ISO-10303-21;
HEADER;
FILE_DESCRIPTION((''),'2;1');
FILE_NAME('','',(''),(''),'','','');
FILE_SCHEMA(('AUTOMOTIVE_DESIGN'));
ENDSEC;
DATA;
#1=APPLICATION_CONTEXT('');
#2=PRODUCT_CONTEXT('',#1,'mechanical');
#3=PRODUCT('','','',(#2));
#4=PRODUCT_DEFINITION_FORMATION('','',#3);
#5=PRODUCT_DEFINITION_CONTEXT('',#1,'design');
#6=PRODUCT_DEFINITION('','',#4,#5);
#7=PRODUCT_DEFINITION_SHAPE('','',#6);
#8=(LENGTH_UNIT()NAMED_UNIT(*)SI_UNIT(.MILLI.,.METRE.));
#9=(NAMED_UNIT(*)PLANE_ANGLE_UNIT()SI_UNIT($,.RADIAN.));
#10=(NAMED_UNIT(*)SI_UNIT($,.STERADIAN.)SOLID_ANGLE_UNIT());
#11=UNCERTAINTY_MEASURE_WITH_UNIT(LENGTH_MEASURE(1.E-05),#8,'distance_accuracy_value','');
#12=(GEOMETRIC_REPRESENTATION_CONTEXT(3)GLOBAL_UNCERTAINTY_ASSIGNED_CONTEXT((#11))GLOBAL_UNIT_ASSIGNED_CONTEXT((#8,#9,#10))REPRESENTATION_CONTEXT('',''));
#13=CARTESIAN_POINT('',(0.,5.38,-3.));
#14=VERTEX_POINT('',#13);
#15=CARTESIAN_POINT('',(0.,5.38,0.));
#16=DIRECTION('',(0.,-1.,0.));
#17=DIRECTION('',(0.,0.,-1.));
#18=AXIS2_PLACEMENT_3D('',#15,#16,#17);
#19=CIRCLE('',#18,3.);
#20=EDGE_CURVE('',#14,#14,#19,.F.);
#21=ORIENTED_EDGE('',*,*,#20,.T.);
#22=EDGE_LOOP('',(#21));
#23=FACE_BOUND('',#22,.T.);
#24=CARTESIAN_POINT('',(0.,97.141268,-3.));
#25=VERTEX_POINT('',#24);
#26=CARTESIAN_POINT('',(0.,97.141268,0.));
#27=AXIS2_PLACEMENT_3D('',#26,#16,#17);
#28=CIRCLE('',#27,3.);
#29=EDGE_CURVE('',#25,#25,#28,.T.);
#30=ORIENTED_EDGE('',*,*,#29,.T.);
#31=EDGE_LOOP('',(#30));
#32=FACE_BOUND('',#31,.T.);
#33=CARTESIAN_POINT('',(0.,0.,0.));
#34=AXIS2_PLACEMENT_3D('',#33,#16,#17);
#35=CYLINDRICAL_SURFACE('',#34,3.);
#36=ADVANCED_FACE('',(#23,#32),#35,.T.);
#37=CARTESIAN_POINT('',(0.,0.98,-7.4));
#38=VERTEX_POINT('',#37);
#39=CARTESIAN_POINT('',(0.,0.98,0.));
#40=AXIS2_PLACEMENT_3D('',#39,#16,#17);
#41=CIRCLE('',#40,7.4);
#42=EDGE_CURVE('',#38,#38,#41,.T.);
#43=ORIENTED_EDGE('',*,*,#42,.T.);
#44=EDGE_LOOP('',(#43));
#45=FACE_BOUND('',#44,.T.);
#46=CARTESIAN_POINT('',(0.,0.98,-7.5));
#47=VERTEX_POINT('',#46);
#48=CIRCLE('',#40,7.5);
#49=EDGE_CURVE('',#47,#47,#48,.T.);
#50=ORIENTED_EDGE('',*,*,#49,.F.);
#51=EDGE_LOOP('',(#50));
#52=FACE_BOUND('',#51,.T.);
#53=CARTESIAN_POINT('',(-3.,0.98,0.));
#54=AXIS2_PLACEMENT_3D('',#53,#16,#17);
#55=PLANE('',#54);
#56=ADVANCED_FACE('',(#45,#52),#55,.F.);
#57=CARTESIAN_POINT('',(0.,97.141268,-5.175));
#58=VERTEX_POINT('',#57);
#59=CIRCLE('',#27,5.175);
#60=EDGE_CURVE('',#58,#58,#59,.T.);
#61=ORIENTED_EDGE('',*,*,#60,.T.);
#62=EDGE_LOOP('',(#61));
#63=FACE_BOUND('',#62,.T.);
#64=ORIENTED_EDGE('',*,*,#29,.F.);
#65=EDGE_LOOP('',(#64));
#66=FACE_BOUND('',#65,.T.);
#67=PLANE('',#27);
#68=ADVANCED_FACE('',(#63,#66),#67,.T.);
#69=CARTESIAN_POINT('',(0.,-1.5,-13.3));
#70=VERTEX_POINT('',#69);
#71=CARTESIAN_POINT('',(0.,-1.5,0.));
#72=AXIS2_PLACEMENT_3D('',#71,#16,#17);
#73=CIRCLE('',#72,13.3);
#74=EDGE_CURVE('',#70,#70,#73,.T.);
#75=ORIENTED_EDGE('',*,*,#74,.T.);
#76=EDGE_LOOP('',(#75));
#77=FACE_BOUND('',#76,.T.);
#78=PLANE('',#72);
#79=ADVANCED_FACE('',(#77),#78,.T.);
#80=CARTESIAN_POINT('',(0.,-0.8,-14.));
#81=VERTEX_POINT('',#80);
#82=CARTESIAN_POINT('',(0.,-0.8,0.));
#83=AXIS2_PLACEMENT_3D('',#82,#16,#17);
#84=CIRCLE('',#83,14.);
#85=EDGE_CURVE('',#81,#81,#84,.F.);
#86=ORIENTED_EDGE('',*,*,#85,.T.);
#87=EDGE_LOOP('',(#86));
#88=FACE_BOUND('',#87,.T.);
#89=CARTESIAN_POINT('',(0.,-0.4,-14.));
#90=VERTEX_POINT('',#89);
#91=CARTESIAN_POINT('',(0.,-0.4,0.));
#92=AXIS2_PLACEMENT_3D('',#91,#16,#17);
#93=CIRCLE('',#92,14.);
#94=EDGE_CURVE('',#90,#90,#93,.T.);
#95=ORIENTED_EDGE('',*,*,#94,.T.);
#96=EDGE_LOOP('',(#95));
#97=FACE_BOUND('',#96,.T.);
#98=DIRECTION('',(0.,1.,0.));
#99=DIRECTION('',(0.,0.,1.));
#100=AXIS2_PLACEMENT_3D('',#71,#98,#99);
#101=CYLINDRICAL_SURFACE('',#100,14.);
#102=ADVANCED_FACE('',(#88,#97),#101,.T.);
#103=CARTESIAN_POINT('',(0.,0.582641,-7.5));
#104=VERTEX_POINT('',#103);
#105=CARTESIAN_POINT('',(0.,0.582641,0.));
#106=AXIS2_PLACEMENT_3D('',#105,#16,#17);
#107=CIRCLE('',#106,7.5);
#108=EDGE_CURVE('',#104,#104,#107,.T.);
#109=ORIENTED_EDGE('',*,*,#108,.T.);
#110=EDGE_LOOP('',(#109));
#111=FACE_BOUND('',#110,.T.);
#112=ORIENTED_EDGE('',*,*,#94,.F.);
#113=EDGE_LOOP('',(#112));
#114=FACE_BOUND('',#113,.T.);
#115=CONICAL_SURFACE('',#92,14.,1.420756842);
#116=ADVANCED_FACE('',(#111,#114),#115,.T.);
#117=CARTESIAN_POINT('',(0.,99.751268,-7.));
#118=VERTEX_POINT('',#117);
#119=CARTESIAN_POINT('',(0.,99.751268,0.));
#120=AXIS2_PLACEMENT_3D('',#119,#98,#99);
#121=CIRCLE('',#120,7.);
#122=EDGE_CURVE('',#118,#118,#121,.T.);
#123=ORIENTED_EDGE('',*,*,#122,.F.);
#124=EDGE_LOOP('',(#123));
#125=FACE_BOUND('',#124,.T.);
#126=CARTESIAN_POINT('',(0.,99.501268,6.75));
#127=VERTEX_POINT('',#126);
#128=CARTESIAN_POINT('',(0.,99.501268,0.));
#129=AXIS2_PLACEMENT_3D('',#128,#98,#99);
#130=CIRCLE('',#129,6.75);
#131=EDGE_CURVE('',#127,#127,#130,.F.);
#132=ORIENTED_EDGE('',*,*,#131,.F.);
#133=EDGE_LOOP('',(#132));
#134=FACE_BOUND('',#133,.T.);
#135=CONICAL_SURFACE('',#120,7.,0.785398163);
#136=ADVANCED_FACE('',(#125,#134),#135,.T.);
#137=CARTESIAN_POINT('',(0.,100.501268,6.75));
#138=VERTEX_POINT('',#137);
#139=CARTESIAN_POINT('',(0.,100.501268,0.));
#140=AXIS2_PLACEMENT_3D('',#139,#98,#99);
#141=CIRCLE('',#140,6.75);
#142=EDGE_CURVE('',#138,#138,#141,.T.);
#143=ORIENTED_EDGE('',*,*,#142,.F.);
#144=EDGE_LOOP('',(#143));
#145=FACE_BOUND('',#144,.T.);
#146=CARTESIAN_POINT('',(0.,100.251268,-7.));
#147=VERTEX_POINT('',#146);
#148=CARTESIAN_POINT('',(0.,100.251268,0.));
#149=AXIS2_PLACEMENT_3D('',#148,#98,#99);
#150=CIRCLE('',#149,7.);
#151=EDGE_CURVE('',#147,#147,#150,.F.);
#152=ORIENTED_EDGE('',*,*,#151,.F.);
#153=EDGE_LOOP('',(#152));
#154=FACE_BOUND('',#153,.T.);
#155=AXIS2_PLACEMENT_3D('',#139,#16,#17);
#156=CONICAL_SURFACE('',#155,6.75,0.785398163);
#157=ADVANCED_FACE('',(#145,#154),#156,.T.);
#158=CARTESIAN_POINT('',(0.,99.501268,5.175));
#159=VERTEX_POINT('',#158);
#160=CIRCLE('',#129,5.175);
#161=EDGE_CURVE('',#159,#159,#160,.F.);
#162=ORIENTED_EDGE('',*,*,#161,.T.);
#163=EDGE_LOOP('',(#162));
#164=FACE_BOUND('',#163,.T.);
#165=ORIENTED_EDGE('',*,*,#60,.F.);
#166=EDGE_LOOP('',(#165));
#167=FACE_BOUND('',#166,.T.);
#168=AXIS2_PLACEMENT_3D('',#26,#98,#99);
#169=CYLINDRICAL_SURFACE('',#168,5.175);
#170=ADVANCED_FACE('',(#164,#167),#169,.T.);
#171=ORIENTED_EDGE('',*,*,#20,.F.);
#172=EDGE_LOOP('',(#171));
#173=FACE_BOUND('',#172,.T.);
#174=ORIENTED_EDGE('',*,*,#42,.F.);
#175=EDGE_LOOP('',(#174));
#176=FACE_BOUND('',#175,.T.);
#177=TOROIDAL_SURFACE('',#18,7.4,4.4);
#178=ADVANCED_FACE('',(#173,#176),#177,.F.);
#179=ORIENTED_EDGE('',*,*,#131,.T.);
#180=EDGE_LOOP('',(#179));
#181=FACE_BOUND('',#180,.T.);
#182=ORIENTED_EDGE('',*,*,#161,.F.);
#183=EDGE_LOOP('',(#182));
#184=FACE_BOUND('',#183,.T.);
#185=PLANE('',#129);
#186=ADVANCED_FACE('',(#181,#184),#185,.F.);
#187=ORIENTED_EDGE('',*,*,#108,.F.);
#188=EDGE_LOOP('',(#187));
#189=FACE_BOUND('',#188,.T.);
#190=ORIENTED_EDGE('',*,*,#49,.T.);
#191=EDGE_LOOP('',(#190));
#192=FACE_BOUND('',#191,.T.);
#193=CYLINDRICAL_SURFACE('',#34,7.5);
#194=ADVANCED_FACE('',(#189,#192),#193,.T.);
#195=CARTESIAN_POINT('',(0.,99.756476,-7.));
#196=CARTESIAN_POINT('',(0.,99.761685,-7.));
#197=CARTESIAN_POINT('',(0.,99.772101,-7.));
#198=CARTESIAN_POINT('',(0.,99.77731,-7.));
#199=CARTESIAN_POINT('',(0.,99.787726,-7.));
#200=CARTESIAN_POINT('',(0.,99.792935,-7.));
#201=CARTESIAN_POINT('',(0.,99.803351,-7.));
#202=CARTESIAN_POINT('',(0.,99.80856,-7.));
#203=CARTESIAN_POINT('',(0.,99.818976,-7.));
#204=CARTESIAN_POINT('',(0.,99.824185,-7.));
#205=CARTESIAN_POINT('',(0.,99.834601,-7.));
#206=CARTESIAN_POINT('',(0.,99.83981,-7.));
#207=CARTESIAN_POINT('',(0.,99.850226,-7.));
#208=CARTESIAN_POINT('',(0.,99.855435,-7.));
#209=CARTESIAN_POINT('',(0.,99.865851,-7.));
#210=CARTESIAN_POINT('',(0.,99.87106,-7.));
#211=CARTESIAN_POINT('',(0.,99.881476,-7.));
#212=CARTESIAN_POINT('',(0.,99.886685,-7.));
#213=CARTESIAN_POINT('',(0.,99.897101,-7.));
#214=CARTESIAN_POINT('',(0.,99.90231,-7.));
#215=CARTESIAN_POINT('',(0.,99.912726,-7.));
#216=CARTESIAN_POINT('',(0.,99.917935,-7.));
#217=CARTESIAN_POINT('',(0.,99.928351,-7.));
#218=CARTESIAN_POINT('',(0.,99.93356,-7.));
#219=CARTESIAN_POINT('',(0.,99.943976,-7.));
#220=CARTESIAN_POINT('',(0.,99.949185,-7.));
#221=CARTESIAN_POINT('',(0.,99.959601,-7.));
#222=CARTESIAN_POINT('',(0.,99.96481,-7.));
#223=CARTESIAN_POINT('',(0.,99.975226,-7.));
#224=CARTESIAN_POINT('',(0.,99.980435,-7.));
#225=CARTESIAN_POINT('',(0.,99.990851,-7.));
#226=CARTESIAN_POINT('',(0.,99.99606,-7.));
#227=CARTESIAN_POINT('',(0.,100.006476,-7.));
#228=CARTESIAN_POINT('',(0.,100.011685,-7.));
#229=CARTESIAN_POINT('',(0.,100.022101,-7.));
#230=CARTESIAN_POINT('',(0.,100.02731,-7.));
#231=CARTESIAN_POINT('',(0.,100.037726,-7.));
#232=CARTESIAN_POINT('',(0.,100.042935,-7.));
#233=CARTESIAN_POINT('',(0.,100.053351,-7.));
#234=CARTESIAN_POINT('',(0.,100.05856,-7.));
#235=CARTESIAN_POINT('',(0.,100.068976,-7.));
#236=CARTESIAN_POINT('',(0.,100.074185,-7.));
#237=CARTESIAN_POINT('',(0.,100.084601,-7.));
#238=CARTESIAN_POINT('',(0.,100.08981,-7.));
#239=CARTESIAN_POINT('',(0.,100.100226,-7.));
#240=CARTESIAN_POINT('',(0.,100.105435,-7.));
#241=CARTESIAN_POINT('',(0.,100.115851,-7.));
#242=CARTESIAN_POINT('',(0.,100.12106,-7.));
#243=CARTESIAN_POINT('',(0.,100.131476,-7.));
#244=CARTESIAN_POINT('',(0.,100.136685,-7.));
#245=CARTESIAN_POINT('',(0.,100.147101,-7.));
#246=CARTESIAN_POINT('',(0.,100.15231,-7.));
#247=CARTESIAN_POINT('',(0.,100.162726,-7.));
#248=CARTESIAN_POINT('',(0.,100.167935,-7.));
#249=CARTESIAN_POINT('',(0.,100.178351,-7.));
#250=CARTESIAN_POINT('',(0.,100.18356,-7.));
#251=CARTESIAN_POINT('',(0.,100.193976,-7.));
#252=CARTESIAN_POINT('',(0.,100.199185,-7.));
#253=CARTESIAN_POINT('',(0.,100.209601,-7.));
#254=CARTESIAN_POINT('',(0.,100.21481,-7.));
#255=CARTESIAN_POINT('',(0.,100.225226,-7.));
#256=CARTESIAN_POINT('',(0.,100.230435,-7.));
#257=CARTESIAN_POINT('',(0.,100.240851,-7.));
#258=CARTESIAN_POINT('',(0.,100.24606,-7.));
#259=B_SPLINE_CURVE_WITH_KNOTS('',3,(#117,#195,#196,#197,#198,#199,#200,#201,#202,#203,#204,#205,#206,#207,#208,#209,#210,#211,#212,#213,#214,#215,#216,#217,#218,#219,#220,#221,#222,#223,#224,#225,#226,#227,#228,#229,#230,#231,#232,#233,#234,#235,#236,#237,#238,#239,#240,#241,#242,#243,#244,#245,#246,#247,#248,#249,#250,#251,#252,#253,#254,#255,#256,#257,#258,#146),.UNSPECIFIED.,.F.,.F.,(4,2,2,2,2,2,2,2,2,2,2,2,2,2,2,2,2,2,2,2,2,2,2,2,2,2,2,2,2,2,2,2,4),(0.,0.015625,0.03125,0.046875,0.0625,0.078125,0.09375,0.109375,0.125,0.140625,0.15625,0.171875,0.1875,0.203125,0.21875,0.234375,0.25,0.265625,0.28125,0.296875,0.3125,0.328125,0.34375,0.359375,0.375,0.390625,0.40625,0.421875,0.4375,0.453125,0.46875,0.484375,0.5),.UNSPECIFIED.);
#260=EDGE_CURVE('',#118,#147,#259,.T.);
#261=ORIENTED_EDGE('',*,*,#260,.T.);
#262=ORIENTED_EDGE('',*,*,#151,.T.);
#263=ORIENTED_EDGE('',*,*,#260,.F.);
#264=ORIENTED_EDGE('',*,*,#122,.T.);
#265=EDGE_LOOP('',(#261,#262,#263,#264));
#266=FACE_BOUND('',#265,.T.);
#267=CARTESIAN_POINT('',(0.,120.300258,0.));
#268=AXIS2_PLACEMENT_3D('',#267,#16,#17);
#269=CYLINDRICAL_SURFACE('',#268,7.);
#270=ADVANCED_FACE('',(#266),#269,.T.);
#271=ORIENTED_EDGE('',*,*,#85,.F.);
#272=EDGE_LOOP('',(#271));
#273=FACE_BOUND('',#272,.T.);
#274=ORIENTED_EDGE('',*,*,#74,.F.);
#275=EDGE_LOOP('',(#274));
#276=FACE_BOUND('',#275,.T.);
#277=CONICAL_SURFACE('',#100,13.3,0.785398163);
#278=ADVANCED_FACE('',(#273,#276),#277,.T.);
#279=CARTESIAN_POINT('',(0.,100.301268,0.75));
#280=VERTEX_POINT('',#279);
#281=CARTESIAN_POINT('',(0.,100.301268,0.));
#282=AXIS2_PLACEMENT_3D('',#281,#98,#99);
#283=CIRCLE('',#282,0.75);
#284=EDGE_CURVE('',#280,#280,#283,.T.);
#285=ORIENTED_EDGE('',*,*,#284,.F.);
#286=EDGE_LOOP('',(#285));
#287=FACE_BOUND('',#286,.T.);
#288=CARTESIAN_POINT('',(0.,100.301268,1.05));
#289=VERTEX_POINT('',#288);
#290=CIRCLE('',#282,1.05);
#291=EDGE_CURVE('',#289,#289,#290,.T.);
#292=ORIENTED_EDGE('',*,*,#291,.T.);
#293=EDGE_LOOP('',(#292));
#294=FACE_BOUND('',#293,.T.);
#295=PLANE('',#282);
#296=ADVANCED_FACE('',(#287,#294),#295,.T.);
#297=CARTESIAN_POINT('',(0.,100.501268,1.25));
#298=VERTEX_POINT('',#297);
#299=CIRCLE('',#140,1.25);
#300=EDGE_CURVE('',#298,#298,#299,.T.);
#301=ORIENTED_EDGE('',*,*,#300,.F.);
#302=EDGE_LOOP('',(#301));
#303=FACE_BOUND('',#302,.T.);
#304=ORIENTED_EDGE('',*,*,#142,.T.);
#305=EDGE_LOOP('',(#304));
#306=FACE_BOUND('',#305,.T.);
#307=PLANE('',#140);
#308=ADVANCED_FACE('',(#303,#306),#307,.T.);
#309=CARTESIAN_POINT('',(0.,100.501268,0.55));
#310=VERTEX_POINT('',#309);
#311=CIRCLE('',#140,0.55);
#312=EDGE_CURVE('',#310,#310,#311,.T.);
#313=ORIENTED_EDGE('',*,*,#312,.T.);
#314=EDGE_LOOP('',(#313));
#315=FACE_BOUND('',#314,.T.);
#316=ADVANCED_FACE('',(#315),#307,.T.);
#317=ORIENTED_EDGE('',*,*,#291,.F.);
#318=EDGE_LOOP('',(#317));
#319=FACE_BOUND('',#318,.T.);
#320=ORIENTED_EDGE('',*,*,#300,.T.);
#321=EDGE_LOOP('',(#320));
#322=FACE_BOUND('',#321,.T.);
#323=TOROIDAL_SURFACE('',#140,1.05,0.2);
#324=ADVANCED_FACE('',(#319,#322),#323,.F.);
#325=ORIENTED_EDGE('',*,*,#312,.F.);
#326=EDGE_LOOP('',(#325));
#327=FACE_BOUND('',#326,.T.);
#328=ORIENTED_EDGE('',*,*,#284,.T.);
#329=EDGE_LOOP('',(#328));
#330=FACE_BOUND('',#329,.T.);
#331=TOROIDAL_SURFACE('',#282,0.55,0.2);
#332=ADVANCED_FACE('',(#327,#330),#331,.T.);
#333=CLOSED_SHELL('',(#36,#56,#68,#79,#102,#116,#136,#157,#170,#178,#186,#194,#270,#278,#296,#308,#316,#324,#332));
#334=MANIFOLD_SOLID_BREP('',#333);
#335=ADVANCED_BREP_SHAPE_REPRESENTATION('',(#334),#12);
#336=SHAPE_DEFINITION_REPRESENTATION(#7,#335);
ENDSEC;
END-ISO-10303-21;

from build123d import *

# Parameters (mm, degrees)
CROQUIS2_R              = 3
SALIENTE_EXTRUIR1_DEPTH = 17.61
CROQUIS3_R              = 7
CROQUIS3_R_2            = 3
SALIENTE_EXTRUIR2_DEPTH = 1
CHAFL_N1_SIZE           = 0.25
CROQUIS4_R              = 14
SALIENTE_EXTRUIR3_DEPTH = 1.5
CHAFL_N2_SIZE           = 0.7
REDONDEO3_R             = 4.4
CROQUIS6_R              = 1.25
CROQUIS6_R_2            = 0.75
CORTAR_EXTRUIR1_DEPTH   = 0.2
REDONDEO4_R             = 0.2
REDONDEO5_R             = 0.2
SALIENTE_EXTRUIR4_START = 2.36
CROQUIS7_R              = 5.175
CROQUIS7_R_2            = 3
SALIENTE_EXTRUIR4_DEPTH = 2.36


with BuildPart() as part:
    # Croquis1 → Revolución1 (revolve)
    with BuildSketch(Plane.XY, mode=Mode.PRIVATE) as revoluci_n1_sk:
        Polygon((-3, 0.98), (-7.5, 0.98), (-14, 0), (0, 0), (0, 82.891267921), (-3, 82.891267921), align=None)
    revolve(revoluci_n1_sk.sketch.rotate(Axis((0, 0, 0), (0, 1, 0)), 270), axis=Axis((0, 0, 0), (0, 1, 0)))

    # Croquis2 → Saliente-Extruir1 (add)
    with BuildSketch(Plane(origin=(0, 82.891267921, 0), x_dir=(1, 0, 0), z_dir=(0, 1, 0))):
        with Locations(Location((0, 0, 0), (0, 0, 90))):
            Circle(CROQUIS2_R)
    extrude(amount=SALIENTE_EXTRUIR1_DEPTH)

    # Croquis3 → Saliente-Extruir2 (add)
    with BuildSketch(Plane(origin=(0, 99.501267921, 0), x_dir=(1, 0, 0), z_dir=(0, 1, 0))):
        with Locations(Location((0, 0, 0), (0, 0, 90))):
            Circle(CROQUIS3_R)
        with Locations(Location((0, 0, 0), (0, 0, 90))):
            Circle(CROQUIS3_R_2, mode=Mode.SUBTRACT)
    extrude(amount=SALIENTE_EXTRUIR2_DEPTH)

    # Chaflán1
    chafl_n1_edges = [part.edges().sort_by_distance(p)[0] for p in [
        (0, 99.501267921, 7),
        (0, 100.501267921, 7),
    ]]
    chamfer(chafl_n1_edges, length=CHAFL_N1_SIZE)

    # Croquis4 → Saliente-Extruir3 (add)
    with BuildSketch(Plane.XZ):
        with Locations(Location((0, 0, 0), (0, 0, 270))):
            Circle(CROQUIS4_R)
    extrude(amount=SALIENTE_EXTRUIR3_DEPTH)

    # Chaflán2
    chafl_n2_edges = [part.edges().sort_by_distance(p)[0] for p in [
        (0, -1.5, 14),
    ]]
    chamfer(chafl_n2_edges, length=CHAFL_N2_SIZE)

    # Redondeo3
    redondeo3_edges = [part.edges().sort_by_distance(p)[0] for p in [
        (0, 0.98, 3),
    ]]
    fillet(redondeo3_edges, radius=REDONDEO3_R)

    # Croquis5 → Cortar-Revolución1 (revolve, cut)
    with BuildSketch(Plane(origin=(0, 0, 0), x_dir=(0, 0, -1), z_dir=(1, 0, 0)), mode=Mode.PRIVATE) as cortar_revoluci_n1_sk:
        Polygon((-7.5, 0.98), (-14, 0), (-14, -0.4), (-7.5, 0.58264143), align=None)
    revolve(cortar_revoluci_n1_sk.sketch.rotate(Axis((0, 0, 0), (0, 1, 0)), 180), axis=Axis((0, 0, 0), (0, 1, 0)), mode=Mode.SUBTRACT)

    # Croquis6 → Cortar-Extruir1 (cut)
    with BuildSketch(Plane(origin=(0, 100.501267921, 0), x_dir=(1, 0, 0), z_dir=(0, 1, 0))):
        with Locations(Location((0, 0, 0), (0, 0, 270))):
            Circle(CROQUIS6_R)
        with Locations(Location((0, 0, 0), (0, 0, 270))):
            Circle(CROQUIS6_R_2, mode=Mode.SUBTRACT)
    extrude(amount=-CORTAR_EXTRUIR1_DEPTH, mode=Mode.SUBTRACT)

    # Redondeo4
    redondeo4_edges = [part.edges().sort_by_distance(p)[0] for p in [
        (0, 100.301267921, -1.25),
    ]]
    fillet(redondeo4_edges, radius=REDONDEO4_R - 0.0001)  # a hair under: the kernel refuses the full size

    # Redondeo5
    redondeo5_edges = [part.edges().sort_by_distance(p)[0] for p in [
        (0, 100.501267921, -0.75),
    ]]
    fillet(redondeo5_edges, radius=REDONDEO5_R - 0.0001)  # a hair under: the kernel refuses the full size

    # Croquis7 → Saliente-Extruir4 (add)
    with BuildSketch(Plane.XZ.offset(-99.501267921).offset(SALIENTE_EXTRUIR4_START)):
        with Locations(Location((0, 0, 0), (0, 0, 90))):
            Circle(CROQUIS7_R)
        with Locations(Location((0, 0, 0), (0, 0, 270))):
            Circle(CROQUIS7_R_2, mode=Mode.SUBTRACT)
    extrude(amount=-SALIENTE_EXTRUIR4_DEPTH)


solid = part.part
